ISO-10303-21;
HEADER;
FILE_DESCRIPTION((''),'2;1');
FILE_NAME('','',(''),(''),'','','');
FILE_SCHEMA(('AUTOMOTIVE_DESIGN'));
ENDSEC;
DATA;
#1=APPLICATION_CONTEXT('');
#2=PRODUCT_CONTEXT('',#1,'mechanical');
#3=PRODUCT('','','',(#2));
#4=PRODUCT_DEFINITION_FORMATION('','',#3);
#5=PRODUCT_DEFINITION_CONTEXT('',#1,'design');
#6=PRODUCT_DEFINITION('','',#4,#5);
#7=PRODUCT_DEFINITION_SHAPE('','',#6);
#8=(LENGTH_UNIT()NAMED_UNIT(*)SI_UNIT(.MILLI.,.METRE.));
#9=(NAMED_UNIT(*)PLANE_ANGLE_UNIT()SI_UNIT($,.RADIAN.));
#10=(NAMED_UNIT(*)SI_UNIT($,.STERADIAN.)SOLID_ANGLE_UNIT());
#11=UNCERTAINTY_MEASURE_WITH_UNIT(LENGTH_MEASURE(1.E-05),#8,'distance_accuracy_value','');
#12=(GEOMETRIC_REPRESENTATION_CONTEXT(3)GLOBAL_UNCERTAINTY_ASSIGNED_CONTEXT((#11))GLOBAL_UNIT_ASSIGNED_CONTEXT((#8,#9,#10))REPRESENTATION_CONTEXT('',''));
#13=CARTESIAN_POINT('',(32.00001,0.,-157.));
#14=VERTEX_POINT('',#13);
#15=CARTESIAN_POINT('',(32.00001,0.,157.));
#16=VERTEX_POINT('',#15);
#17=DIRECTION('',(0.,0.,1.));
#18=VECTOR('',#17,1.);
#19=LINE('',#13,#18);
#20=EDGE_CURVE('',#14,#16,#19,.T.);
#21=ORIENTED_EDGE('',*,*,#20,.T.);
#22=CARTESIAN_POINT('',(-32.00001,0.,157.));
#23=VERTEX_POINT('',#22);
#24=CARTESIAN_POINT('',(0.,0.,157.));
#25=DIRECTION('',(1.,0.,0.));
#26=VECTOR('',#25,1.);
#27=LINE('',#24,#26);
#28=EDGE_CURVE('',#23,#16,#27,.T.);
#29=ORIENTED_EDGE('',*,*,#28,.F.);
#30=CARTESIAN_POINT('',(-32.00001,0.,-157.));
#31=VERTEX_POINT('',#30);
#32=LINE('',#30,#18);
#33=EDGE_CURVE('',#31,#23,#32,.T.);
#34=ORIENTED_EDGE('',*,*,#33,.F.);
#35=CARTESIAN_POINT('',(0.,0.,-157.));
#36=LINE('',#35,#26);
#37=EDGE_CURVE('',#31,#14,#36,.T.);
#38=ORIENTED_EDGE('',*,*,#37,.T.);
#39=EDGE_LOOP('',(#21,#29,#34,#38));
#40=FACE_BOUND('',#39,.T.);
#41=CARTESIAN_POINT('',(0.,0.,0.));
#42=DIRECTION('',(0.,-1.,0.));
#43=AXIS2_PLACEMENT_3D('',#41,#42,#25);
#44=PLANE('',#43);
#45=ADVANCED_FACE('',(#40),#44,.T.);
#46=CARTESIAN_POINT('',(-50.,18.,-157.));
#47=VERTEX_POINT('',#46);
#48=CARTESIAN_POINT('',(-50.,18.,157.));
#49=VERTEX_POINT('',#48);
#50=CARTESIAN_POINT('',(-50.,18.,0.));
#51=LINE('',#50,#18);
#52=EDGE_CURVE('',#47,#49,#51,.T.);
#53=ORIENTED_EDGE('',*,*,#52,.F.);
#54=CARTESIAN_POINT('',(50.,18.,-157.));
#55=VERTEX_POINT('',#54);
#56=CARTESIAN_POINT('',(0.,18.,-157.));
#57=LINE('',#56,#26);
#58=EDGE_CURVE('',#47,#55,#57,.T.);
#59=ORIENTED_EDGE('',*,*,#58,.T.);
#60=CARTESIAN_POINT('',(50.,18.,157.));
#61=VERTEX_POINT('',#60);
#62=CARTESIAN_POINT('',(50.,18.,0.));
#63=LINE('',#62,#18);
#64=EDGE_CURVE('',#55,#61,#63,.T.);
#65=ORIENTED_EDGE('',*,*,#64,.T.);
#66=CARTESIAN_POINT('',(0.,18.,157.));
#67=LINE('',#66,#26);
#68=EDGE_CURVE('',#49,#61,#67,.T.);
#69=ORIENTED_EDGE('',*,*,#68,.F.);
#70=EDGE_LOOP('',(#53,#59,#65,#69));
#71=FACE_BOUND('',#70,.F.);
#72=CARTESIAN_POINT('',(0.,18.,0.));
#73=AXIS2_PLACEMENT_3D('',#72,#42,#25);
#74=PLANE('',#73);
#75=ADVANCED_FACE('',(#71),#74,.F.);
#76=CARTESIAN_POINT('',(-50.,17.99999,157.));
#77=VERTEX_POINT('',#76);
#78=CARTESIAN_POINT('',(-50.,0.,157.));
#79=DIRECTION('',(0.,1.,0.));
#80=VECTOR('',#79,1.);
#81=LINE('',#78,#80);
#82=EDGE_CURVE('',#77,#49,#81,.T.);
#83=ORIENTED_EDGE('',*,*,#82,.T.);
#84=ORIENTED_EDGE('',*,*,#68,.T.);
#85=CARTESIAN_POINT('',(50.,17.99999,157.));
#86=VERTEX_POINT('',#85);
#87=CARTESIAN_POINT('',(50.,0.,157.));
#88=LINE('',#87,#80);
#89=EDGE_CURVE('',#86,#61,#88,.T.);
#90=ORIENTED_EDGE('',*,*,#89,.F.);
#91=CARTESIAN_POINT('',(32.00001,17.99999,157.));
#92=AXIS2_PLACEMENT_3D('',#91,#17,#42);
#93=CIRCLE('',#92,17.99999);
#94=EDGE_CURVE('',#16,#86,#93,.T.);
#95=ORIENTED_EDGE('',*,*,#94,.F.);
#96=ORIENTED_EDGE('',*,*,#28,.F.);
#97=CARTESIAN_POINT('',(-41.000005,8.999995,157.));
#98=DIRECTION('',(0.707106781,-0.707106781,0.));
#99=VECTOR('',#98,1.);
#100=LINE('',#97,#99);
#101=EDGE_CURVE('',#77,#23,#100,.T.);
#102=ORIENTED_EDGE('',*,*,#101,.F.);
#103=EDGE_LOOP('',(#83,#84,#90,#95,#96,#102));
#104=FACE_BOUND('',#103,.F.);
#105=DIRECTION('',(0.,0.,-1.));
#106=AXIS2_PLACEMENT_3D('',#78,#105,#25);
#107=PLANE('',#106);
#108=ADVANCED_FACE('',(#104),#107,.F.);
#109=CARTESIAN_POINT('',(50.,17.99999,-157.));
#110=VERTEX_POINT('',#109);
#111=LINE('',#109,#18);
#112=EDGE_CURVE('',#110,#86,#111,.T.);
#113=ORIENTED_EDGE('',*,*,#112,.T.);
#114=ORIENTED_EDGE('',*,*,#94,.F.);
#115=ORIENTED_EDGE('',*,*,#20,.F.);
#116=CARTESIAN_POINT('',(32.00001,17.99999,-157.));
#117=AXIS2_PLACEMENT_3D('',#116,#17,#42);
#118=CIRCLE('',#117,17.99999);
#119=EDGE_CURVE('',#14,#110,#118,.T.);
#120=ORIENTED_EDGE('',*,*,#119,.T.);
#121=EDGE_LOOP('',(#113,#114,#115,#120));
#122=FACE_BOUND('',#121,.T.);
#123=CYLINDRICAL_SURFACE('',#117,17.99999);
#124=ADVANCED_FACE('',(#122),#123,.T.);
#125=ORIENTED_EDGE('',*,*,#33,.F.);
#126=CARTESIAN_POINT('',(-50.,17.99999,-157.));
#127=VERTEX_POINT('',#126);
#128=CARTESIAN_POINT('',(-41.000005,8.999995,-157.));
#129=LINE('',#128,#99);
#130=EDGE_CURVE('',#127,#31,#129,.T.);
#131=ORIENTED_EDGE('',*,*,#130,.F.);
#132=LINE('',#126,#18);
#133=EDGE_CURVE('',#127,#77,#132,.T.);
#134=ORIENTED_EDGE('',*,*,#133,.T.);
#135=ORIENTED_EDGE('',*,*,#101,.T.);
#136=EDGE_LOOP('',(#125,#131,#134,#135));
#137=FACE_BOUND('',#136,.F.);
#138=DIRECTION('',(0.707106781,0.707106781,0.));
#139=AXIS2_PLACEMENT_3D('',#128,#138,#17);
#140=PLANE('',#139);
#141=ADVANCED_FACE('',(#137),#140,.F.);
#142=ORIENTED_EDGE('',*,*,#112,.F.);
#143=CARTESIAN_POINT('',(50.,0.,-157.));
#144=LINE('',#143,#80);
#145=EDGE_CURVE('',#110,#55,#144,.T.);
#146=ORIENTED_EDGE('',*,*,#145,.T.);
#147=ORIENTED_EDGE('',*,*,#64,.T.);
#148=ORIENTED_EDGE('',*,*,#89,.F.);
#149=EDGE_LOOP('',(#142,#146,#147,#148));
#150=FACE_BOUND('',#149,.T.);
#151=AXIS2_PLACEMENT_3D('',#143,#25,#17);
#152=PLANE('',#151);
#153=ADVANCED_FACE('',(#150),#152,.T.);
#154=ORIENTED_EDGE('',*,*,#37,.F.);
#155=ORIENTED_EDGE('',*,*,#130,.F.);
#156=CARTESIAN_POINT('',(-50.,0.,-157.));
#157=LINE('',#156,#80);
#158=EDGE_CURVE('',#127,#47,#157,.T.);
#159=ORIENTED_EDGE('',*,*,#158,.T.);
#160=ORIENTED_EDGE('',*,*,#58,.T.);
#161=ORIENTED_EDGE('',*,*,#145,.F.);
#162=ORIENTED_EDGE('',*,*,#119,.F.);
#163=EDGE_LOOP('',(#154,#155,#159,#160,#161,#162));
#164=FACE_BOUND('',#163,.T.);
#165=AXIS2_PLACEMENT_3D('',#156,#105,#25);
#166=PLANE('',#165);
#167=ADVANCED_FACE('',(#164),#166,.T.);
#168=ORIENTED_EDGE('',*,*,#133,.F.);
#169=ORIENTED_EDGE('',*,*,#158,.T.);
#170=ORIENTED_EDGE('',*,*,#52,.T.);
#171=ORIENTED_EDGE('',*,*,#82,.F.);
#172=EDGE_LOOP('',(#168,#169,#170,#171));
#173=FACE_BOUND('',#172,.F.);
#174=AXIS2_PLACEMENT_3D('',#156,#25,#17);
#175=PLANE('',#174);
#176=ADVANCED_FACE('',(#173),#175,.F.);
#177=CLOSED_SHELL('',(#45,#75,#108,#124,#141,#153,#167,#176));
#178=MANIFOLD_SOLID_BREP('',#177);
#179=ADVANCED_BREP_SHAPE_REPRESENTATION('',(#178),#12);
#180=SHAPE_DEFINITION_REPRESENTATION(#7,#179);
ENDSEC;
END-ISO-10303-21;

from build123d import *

# Parameters (mm, degrees)
F0_W     = 100
F0_H     = 314
F1_DEPTH = 18
F2_SIZE  = 17.99999
F3_R     = 17.99999


# Not quite as in the source:
# - a fillet or chamfer is up to 0.001 mm smaller than in the source, because OpenCascade refuses the exact size


with BuildPart() as f1:
    # F0 (on Front) → F1 (new body)
    with BuildSketch(Plane.XZ):
        Rectangle(F0_W, F0_H)
    extrude(amount=-F1_DEPTH)

    # F2 (size 18 in the source; OpenCascade refuses exactly that, so slightly less here)
    f2_edges = [f1.edges().sort_by_distance(p)[0] for p in [
        (-50, 0, 0),
    ]]
    chamfer(f2_edges, length=F2_SIZE)

    # F3 (radius 18 in the source; OpenCascade refuses exactly that, so slightly less here)
    f3_edges = [f1.edges().sort_by_distance(p)[0] for p in [
        (50, 0, 0),
    ]]
    fillet(f3_edges, radius=F3_R)


solid = f1.part
